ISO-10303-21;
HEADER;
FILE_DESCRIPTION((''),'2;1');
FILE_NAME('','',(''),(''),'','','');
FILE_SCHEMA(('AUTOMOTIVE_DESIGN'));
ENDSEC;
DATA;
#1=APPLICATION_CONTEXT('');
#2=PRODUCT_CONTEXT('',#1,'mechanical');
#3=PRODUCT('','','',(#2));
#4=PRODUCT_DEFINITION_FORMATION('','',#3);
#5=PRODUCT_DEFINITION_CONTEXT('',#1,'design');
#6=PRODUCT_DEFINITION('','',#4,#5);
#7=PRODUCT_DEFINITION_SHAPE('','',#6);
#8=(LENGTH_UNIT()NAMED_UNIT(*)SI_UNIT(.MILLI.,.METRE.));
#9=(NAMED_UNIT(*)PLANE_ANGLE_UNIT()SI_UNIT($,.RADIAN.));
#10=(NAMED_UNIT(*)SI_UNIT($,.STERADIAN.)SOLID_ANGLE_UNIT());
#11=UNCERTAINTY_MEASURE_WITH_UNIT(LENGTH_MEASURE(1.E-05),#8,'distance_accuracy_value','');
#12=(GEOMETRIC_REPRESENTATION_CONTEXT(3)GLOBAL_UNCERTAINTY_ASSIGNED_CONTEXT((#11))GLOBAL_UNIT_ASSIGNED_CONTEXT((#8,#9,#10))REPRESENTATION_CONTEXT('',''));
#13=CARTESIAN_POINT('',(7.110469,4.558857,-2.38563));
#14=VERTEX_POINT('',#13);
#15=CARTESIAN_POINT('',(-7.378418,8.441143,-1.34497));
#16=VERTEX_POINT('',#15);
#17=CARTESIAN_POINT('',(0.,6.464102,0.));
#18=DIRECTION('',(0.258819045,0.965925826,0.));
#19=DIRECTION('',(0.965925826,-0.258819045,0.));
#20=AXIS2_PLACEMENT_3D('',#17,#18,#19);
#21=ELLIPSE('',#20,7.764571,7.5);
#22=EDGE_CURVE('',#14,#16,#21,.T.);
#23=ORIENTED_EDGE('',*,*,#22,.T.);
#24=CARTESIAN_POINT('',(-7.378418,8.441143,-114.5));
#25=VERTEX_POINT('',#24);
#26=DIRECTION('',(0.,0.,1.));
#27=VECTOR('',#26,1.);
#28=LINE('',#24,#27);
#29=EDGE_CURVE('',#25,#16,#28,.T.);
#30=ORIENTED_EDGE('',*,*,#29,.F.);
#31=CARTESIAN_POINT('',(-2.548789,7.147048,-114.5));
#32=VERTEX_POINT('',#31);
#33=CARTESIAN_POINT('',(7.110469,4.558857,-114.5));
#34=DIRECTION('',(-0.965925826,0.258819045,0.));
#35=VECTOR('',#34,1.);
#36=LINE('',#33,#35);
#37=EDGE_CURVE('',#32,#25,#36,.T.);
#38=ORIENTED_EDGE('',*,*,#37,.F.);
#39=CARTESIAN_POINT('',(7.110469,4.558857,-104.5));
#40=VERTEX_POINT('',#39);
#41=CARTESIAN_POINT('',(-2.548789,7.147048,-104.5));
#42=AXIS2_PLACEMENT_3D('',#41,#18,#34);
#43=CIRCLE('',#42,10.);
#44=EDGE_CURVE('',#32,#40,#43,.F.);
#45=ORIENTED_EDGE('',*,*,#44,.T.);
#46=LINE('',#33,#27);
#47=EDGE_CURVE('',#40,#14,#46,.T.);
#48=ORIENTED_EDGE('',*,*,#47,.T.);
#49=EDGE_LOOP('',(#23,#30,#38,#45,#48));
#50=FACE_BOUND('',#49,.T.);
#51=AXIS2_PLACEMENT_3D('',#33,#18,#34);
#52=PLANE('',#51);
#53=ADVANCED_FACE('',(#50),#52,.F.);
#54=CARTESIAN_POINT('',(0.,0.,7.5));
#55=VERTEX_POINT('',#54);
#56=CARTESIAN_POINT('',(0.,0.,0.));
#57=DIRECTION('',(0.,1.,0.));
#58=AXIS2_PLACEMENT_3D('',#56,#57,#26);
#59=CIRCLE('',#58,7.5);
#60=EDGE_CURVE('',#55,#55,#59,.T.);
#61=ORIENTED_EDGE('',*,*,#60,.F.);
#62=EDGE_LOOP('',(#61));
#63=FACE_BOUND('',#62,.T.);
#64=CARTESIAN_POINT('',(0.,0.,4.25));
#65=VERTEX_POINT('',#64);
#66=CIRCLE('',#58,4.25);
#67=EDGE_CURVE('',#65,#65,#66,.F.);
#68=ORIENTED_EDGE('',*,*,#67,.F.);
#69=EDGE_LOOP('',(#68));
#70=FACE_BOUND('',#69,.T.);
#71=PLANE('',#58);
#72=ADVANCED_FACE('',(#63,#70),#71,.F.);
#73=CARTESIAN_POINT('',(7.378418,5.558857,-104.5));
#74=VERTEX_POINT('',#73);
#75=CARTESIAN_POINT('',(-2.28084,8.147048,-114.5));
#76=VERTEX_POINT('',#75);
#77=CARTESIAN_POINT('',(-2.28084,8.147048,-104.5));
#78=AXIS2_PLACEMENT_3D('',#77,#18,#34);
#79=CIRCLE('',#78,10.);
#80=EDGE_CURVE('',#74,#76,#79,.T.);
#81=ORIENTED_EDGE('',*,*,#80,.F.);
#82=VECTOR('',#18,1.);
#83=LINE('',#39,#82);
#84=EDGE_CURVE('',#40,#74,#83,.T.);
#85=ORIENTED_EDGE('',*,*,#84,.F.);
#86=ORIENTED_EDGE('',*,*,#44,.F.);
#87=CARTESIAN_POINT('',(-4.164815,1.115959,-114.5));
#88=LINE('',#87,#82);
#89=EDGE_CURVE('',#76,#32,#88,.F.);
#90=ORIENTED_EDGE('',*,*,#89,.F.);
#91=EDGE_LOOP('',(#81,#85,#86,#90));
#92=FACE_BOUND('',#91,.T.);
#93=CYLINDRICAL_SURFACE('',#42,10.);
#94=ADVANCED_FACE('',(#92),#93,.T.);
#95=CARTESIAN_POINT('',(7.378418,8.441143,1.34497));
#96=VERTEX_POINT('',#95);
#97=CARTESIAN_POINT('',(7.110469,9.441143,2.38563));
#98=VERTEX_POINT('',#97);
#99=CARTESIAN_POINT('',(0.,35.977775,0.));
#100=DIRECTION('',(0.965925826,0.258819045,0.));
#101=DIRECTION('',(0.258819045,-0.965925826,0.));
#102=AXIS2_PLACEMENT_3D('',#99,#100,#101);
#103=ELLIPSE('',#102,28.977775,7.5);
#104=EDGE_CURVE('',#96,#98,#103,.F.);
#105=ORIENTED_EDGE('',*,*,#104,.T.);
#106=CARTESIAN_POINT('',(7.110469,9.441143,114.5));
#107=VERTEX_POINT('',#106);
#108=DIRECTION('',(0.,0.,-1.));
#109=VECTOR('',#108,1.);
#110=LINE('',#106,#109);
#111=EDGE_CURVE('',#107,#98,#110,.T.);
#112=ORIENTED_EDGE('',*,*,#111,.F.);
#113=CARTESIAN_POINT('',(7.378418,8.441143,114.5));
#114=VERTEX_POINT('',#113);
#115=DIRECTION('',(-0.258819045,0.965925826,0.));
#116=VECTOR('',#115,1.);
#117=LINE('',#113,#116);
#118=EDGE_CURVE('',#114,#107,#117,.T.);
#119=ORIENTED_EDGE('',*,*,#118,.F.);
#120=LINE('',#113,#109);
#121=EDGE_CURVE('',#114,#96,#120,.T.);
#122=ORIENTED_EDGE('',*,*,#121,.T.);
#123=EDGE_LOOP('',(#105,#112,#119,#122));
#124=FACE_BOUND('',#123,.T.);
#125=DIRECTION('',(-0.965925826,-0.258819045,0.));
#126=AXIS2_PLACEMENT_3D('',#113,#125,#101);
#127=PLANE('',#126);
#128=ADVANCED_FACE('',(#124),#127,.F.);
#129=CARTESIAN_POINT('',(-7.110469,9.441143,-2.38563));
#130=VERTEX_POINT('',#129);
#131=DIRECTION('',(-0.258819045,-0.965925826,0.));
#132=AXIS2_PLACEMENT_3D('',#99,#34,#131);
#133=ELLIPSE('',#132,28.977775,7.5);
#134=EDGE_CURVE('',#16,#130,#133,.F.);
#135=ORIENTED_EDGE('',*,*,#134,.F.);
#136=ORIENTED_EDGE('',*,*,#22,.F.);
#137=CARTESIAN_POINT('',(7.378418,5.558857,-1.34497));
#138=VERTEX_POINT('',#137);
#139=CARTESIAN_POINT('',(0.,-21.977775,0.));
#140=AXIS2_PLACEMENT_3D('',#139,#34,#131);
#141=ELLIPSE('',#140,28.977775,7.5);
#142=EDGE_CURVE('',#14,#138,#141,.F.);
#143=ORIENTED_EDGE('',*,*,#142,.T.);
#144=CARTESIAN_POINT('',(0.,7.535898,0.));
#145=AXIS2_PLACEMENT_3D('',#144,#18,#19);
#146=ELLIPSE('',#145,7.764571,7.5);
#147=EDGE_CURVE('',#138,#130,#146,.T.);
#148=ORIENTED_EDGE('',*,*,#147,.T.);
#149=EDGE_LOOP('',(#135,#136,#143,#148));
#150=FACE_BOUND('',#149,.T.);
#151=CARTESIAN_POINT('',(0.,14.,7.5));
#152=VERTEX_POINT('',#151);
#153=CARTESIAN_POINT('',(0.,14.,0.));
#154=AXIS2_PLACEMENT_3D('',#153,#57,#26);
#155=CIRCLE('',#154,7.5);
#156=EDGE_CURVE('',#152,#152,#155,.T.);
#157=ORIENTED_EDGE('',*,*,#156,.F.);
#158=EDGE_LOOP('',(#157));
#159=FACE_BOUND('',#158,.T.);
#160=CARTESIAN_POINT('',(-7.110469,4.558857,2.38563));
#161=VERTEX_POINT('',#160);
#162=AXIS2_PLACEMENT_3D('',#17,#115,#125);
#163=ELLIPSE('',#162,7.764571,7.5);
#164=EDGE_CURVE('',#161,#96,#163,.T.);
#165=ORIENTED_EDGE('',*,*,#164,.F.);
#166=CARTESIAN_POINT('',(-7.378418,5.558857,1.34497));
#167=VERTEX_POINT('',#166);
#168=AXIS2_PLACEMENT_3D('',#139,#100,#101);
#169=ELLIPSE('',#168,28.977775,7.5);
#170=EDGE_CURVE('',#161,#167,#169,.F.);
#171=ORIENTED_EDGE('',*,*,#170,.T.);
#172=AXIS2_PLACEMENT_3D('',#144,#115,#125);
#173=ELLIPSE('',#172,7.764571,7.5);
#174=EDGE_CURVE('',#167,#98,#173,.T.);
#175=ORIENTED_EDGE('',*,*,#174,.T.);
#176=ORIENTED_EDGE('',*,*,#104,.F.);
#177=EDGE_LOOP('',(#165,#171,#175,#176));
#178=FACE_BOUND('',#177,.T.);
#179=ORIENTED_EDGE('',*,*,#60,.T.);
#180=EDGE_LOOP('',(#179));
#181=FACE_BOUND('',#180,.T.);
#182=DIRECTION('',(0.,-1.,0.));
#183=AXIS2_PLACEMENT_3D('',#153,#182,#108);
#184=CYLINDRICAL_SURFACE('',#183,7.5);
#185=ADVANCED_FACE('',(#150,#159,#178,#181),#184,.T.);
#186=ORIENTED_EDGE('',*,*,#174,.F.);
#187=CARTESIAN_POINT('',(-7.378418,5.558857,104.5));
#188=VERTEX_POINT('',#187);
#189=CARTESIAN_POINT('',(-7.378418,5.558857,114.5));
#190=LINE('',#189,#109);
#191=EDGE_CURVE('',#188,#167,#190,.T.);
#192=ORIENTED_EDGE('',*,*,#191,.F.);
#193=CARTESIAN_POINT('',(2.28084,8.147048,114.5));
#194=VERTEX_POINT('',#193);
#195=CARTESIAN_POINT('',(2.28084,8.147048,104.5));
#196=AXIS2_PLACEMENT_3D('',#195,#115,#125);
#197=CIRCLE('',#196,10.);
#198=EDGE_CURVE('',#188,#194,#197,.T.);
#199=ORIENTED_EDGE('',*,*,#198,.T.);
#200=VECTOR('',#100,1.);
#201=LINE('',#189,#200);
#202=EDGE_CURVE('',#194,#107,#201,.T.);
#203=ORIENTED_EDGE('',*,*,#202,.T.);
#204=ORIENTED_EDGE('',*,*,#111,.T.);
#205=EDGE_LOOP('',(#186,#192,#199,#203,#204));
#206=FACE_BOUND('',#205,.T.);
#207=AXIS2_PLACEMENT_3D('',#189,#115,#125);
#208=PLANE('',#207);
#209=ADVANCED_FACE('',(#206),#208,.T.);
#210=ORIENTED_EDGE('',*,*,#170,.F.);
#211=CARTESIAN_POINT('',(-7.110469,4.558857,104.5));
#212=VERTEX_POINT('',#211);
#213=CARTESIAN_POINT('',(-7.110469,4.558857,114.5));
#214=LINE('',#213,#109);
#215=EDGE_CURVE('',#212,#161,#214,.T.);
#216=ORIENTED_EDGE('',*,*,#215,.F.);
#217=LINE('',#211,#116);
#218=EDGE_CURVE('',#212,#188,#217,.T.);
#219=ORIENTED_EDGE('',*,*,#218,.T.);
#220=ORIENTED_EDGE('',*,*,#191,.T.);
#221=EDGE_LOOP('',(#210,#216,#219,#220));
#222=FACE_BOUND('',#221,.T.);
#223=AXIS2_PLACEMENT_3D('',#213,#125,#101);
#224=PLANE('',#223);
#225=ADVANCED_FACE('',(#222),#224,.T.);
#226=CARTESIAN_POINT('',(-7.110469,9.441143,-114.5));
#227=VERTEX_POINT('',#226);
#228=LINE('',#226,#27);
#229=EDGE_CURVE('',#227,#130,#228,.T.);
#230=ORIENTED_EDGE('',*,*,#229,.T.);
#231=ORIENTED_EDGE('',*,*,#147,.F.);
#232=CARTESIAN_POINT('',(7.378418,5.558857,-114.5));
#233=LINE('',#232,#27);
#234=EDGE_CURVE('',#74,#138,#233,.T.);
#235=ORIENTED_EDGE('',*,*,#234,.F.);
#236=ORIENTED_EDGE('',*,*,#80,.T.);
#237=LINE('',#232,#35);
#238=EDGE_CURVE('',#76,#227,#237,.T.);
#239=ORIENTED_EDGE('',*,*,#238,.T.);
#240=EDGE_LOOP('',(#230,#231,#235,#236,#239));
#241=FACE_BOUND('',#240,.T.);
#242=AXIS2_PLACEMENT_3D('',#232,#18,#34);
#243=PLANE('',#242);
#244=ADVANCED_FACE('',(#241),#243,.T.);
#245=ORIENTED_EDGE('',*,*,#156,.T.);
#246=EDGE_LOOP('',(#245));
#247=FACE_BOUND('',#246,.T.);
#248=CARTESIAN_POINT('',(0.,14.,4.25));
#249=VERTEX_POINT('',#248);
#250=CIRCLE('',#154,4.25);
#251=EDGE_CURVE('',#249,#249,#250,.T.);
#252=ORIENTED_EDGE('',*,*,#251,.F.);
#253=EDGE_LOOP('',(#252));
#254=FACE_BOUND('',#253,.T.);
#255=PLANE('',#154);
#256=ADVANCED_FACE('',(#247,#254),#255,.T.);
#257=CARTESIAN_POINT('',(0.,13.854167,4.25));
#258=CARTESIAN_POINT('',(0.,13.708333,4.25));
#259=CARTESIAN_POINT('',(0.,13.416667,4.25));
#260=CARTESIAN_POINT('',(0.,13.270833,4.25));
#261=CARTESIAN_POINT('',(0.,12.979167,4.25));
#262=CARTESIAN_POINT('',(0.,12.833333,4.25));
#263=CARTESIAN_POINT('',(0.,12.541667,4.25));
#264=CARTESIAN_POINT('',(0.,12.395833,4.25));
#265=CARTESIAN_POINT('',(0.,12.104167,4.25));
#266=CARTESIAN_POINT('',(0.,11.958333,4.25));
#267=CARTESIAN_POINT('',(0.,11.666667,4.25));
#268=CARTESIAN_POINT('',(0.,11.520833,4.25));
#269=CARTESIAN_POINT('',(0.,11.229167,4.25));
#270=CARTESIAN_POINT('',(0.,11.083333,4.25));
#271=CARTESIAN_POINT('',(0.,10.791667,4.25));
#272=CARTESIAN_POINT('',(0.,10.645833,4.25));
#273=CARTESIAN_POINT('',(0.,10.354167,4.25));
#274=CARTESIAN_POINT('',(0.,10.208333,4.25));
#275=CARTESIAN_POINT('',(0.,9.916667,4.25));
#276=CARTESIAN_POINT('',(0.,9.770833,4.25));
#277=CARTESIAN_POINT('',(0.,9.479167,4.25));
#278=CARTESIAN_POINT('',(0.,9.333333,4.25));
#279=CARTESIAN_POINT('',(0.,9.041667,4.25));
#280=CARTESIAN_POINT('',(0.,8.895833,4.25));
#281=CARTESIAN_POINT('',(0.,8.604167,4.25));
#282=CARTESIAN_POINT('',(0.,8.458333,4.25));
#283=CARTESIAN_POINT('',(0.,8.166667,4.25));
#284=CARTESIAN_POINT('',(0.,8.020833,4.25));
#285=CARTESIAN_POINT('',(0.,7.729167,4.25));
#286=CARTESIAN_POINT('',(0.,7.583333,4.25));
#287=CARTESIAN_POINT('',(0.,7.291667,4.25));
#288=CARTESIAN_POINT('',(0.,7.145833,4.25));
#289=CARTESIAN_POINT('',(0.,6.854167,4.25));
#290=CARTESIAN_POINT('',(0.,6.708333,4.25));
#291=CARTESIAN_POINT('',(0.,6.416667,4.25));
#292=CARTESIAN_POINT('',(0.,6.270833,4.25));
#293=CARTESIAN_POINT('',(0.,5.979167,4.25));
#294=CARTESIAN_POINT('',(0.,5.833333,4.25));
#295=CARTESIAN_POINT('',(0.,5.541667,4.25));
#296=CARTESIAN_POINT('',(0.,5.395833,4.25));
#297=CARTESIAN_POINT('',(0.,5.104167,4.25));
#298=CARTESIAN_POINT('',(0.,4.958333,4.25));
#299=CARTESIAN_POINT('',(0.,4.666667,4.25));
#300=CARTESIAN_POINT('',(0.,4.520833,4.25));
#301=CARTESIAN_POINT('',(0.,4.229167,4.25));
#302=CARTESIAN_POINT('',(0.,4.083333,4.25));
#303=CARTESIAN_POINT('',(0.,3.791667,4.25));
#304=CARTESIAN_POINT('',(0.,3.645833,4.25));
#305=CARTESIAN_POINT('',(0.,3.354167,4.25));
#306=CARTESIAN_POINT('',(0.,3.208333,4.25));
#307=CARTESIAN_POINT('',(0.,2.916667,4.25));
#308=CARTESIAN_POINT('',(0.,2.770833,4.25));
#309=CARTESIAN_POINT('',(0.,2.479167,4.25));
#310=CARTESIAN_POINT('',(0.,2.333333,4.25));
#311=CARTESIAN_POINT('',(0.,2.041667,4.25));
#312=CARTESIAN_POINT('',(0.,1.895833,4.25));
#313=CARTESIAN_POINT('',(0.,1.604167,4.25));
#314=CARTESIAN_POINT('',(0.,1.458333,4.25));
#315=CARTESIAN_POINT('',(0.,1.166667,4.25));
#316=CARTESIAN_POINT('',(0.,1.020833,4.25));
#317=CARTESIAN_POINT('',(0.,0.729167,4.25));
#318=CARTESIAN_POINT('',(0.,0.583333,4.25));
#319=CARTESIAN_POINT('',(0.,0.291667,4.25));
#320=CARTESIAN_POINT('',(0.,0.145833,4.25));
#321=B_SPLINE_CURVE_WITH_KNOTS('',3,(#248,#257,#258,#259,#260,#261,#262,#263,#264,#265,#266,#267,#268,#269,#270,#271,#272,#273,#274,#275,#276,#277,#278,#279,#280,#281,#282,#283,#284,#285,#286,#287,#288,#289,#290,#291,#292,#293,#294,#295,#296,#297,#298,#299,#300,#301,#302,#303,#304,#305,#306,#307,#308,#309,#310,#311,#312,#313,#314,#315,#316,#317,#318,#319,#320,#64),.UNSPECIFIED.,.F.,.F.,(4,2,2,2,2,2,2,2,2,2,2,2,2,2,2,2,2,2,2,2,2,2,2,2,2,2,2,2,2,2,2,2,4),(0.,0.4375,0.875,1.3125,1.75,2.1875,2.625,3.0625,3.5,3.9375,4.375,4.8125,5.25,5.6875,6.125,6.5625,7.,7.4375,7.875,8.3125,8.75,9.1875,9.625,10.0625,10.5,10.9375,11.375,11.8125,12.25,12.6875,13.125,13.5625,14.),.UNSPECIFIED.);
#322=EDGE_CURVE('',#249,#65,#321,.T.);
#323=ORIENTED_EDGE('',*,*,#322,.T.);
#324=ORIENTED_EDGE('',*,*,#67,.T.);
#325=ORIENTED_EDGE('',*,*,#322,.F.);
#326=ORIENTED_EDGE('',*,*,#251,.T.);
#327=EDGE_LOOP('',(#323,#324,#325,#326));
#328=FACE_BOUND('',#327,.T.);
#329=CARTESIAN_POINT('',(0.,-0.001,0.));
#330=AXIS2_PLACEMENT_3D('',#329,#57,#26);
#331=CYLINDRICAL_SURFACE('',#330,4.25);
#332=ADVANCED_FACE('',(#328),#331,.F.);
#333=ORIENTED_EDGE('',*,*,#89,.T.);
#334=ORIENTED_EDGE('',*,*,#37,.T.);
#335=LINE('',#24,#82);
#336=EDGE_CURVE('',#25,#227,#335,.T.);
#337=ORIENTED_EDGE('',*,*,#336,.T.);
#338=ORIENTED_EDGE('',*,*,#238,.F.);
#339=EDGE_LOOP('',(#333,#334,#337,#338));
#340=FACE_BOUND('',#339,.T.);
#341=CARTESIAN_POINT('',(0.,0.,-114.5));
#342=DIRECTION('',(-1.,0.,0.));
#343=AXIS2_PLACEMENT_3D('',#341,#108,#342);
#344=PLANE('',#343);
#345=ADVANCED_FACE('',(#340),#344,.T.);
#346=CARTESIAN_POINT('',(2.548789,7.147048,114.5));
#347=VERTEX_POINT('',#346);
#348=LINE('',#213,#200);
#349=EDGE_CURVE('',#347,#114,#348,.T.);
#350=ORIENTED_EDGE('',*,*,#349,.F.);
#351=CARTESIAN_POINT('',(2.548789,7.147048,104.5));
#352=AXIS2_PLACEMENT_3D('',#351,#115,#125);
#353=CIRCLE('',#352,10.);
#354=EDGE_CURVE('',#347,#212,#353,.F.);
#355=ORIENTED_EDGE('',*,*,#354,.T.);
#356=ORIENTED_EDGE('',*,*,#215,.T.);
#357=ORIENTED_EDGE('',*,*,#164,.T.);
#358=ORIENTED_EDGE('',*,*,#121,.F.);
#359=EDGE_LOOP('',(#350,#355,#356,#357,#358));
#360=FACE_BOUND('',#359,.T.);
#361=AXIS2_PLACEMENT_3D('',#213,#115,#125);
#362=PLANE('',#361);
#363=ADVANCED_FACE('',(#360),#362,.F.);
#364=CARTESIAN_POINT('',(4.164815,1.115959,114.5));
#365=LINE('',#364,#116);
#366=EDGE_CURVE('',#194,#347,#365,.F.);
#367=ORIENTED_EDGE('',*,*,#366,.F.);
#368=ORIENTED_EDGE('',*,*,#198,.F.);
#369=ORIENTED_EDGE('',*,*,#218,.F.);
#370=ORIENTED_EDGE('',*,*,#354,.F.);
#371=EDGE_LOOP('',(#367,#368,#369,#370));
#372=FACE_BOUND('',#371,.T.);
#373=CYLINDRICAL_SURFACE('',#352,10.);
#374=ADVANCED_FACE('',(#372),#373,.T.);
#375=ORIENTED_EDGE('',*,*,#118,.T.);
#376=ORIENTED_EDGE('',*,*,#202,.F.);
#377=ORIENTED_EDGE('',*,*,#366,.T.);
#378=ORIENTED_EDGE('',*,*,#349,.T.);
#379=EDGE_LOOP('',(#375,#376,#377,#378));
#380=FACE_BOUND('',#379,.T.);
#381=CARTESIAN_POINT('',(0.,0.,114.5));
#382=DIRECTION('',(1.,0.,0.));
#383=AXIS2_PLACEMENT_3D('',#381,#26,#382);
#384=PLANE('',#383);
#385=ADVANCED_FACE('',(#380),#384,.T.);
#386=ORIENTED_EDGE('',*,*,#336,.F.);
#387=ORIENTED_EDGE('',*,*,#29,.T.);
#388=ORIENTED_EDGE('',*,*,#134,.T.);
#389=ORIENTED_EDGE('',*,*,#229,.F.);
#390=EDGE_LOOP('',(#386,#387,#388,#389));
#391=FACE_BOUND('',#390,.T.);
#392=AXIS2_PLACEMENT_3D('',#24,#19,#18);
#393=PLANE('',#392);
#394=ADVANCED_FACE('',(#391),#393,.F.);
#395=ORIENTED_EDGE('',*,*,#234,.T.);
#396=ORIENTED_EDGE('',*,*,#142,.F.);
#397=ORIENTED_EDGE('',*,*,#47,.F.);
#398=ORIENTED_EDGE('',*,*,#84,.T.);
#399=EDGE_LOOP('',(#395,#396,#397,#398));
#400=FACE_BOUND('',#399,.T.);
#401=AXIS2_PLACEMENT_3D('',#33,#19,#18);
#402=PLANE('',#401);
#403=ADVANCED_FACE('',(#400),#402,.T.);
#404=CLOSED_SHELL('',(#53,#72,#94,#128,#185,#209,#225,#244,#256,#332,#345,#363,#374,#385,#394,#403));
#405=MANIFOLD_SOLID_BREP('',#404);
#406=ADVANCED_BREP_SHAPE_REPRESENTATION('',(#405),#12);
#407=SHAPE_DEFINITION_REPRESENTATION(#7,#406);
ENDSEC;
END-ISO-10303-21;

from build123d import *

# Parameters (mm, degrees)
SKETCH1_R           = 7.5
BOSS_EXTRUDE2_DEPTH = 14
CUT_EXTRUDE1_REACH  = 19.564
SKETCH2_R           = 4.25
BOSS_EXTRUDE3_START = -7.279118874
BOSS_EXTRUDE3_DEPTH = 1.03527618
FILLET1_R           = 10
CIRPATTERN1_COUNT   = 2
FILLET3_R           = 10


with BuildPart() as part:
    # Sketch1 → Boss-Extrude2 (new body)
    with BuildSketch(Plane(origin=(0, 0, 0), x_dir=(1, 0, 0), z_dir=(0, 1, 0))):
        with Locations(Location((0, 0, 0), (0, 0, 270))):
            Circle(SKETCH1_R)
    extrude(amount=BOSS_EXTRUDE2_DEPTH)

    # Sketch2 → Cut-Extrude1 (cut, up to next)
    with BuildSketch(Plane(origin=(0, 14, 0), x_dir=(1, 0, 0), z_dir=(0, 1, 0)), mode=Mode.PRIVATE) as cut_extrude1_sk1:
        with Locations(Location((0, 0, 0), (0, 0, 270))):
            Circle(SKETCH2_R)
    cut_extrude1_tool1 = extrude(cut_extrude1_sk1.sketch, amount=-CUT_EXTRUDE1_REACH, mode=Mode.PRIVATE) & part.part
    add(cut_extrude1_tool1.solids().sort_by_distance((0, 14, 0))[0], mode=Mode.SUBTRACT)

    # Boss-Extrude3: read off the stored shape, not the designer's step
    # Boss-Extrude3 outline → Boss-Extrude3 (add)
    with BuildSketch(Plane(origin=(0, 0, 0), x_dir=(0.9659258262890672, 0.2588190451025251, 0), z_dir=(0.25881904510252507, -0.9659258262890672, 0)).offset(BOSS_EXTRUDE3_START)):
        with BuildLine():
            add(Edge.make_bspline(
                [(-5.688266684, 1.344969698), (-4.547659305, 7.389056985), (1.811733316, 7.498803292)],
                knots=[0.18030465, 0.18030465, 0.18030465, 1.551469461, 1.551469461, 1.551469461], degree=2, weights=[1, 0.771122328, 0.993637519]))
            add(Edge.make_bspline(
                [(1.811733316, 7.498803292), (8.171125936, 7.389056985), (9.311733316, 1.344969698)],
                knots=[1.590123193, 1.590123193, 1.590123193, 2.961288004, 2.961288004, 2.961288004], degree=2, weights=[0.993637519, 0.771122328, 1]))
            Line((9.311733316, 1.344969698), (9.311733316, 114.5))
            Line((9.311733316, 114.5), (-5.688266684, 114.5))
            Line((-5.688266684, 114.5), (-5.688266684, 1.344969698))
        make_face()
    boss_extrude3 = extrude(amount=BOSS_EXTRUDE3_DEPTH)

    # Fillet1
    fillet1_edges = [part.edges().sort_by_distance(p)[0] for p in [
        (-7.244443697, 5.058857162, 114.5),
    ]]
    fillet(fillet1_edges, radius=FILLET1_R)

    # CirPattern1: Boss-Extrude3 ×2 about axis
    cirpattern1_axis = Axis((0, 0, 0), (0, 1, 0))
    for i in range(1, CIRPATTERN1_COUNT):
        add(boss_extrude3.rotate(cirpattern1_axis, i * 360 / CIRPATTERN1_COUNT))

    # Fillet3
    fillet3_edges = [part.edges().sort_by_distance(p)[0] for p in [
        (7.244443697, 5.058857162, -114.5),
    ]]
    fillet(fillet3_edges, radius=FILLET3_R)


solid = part.part
